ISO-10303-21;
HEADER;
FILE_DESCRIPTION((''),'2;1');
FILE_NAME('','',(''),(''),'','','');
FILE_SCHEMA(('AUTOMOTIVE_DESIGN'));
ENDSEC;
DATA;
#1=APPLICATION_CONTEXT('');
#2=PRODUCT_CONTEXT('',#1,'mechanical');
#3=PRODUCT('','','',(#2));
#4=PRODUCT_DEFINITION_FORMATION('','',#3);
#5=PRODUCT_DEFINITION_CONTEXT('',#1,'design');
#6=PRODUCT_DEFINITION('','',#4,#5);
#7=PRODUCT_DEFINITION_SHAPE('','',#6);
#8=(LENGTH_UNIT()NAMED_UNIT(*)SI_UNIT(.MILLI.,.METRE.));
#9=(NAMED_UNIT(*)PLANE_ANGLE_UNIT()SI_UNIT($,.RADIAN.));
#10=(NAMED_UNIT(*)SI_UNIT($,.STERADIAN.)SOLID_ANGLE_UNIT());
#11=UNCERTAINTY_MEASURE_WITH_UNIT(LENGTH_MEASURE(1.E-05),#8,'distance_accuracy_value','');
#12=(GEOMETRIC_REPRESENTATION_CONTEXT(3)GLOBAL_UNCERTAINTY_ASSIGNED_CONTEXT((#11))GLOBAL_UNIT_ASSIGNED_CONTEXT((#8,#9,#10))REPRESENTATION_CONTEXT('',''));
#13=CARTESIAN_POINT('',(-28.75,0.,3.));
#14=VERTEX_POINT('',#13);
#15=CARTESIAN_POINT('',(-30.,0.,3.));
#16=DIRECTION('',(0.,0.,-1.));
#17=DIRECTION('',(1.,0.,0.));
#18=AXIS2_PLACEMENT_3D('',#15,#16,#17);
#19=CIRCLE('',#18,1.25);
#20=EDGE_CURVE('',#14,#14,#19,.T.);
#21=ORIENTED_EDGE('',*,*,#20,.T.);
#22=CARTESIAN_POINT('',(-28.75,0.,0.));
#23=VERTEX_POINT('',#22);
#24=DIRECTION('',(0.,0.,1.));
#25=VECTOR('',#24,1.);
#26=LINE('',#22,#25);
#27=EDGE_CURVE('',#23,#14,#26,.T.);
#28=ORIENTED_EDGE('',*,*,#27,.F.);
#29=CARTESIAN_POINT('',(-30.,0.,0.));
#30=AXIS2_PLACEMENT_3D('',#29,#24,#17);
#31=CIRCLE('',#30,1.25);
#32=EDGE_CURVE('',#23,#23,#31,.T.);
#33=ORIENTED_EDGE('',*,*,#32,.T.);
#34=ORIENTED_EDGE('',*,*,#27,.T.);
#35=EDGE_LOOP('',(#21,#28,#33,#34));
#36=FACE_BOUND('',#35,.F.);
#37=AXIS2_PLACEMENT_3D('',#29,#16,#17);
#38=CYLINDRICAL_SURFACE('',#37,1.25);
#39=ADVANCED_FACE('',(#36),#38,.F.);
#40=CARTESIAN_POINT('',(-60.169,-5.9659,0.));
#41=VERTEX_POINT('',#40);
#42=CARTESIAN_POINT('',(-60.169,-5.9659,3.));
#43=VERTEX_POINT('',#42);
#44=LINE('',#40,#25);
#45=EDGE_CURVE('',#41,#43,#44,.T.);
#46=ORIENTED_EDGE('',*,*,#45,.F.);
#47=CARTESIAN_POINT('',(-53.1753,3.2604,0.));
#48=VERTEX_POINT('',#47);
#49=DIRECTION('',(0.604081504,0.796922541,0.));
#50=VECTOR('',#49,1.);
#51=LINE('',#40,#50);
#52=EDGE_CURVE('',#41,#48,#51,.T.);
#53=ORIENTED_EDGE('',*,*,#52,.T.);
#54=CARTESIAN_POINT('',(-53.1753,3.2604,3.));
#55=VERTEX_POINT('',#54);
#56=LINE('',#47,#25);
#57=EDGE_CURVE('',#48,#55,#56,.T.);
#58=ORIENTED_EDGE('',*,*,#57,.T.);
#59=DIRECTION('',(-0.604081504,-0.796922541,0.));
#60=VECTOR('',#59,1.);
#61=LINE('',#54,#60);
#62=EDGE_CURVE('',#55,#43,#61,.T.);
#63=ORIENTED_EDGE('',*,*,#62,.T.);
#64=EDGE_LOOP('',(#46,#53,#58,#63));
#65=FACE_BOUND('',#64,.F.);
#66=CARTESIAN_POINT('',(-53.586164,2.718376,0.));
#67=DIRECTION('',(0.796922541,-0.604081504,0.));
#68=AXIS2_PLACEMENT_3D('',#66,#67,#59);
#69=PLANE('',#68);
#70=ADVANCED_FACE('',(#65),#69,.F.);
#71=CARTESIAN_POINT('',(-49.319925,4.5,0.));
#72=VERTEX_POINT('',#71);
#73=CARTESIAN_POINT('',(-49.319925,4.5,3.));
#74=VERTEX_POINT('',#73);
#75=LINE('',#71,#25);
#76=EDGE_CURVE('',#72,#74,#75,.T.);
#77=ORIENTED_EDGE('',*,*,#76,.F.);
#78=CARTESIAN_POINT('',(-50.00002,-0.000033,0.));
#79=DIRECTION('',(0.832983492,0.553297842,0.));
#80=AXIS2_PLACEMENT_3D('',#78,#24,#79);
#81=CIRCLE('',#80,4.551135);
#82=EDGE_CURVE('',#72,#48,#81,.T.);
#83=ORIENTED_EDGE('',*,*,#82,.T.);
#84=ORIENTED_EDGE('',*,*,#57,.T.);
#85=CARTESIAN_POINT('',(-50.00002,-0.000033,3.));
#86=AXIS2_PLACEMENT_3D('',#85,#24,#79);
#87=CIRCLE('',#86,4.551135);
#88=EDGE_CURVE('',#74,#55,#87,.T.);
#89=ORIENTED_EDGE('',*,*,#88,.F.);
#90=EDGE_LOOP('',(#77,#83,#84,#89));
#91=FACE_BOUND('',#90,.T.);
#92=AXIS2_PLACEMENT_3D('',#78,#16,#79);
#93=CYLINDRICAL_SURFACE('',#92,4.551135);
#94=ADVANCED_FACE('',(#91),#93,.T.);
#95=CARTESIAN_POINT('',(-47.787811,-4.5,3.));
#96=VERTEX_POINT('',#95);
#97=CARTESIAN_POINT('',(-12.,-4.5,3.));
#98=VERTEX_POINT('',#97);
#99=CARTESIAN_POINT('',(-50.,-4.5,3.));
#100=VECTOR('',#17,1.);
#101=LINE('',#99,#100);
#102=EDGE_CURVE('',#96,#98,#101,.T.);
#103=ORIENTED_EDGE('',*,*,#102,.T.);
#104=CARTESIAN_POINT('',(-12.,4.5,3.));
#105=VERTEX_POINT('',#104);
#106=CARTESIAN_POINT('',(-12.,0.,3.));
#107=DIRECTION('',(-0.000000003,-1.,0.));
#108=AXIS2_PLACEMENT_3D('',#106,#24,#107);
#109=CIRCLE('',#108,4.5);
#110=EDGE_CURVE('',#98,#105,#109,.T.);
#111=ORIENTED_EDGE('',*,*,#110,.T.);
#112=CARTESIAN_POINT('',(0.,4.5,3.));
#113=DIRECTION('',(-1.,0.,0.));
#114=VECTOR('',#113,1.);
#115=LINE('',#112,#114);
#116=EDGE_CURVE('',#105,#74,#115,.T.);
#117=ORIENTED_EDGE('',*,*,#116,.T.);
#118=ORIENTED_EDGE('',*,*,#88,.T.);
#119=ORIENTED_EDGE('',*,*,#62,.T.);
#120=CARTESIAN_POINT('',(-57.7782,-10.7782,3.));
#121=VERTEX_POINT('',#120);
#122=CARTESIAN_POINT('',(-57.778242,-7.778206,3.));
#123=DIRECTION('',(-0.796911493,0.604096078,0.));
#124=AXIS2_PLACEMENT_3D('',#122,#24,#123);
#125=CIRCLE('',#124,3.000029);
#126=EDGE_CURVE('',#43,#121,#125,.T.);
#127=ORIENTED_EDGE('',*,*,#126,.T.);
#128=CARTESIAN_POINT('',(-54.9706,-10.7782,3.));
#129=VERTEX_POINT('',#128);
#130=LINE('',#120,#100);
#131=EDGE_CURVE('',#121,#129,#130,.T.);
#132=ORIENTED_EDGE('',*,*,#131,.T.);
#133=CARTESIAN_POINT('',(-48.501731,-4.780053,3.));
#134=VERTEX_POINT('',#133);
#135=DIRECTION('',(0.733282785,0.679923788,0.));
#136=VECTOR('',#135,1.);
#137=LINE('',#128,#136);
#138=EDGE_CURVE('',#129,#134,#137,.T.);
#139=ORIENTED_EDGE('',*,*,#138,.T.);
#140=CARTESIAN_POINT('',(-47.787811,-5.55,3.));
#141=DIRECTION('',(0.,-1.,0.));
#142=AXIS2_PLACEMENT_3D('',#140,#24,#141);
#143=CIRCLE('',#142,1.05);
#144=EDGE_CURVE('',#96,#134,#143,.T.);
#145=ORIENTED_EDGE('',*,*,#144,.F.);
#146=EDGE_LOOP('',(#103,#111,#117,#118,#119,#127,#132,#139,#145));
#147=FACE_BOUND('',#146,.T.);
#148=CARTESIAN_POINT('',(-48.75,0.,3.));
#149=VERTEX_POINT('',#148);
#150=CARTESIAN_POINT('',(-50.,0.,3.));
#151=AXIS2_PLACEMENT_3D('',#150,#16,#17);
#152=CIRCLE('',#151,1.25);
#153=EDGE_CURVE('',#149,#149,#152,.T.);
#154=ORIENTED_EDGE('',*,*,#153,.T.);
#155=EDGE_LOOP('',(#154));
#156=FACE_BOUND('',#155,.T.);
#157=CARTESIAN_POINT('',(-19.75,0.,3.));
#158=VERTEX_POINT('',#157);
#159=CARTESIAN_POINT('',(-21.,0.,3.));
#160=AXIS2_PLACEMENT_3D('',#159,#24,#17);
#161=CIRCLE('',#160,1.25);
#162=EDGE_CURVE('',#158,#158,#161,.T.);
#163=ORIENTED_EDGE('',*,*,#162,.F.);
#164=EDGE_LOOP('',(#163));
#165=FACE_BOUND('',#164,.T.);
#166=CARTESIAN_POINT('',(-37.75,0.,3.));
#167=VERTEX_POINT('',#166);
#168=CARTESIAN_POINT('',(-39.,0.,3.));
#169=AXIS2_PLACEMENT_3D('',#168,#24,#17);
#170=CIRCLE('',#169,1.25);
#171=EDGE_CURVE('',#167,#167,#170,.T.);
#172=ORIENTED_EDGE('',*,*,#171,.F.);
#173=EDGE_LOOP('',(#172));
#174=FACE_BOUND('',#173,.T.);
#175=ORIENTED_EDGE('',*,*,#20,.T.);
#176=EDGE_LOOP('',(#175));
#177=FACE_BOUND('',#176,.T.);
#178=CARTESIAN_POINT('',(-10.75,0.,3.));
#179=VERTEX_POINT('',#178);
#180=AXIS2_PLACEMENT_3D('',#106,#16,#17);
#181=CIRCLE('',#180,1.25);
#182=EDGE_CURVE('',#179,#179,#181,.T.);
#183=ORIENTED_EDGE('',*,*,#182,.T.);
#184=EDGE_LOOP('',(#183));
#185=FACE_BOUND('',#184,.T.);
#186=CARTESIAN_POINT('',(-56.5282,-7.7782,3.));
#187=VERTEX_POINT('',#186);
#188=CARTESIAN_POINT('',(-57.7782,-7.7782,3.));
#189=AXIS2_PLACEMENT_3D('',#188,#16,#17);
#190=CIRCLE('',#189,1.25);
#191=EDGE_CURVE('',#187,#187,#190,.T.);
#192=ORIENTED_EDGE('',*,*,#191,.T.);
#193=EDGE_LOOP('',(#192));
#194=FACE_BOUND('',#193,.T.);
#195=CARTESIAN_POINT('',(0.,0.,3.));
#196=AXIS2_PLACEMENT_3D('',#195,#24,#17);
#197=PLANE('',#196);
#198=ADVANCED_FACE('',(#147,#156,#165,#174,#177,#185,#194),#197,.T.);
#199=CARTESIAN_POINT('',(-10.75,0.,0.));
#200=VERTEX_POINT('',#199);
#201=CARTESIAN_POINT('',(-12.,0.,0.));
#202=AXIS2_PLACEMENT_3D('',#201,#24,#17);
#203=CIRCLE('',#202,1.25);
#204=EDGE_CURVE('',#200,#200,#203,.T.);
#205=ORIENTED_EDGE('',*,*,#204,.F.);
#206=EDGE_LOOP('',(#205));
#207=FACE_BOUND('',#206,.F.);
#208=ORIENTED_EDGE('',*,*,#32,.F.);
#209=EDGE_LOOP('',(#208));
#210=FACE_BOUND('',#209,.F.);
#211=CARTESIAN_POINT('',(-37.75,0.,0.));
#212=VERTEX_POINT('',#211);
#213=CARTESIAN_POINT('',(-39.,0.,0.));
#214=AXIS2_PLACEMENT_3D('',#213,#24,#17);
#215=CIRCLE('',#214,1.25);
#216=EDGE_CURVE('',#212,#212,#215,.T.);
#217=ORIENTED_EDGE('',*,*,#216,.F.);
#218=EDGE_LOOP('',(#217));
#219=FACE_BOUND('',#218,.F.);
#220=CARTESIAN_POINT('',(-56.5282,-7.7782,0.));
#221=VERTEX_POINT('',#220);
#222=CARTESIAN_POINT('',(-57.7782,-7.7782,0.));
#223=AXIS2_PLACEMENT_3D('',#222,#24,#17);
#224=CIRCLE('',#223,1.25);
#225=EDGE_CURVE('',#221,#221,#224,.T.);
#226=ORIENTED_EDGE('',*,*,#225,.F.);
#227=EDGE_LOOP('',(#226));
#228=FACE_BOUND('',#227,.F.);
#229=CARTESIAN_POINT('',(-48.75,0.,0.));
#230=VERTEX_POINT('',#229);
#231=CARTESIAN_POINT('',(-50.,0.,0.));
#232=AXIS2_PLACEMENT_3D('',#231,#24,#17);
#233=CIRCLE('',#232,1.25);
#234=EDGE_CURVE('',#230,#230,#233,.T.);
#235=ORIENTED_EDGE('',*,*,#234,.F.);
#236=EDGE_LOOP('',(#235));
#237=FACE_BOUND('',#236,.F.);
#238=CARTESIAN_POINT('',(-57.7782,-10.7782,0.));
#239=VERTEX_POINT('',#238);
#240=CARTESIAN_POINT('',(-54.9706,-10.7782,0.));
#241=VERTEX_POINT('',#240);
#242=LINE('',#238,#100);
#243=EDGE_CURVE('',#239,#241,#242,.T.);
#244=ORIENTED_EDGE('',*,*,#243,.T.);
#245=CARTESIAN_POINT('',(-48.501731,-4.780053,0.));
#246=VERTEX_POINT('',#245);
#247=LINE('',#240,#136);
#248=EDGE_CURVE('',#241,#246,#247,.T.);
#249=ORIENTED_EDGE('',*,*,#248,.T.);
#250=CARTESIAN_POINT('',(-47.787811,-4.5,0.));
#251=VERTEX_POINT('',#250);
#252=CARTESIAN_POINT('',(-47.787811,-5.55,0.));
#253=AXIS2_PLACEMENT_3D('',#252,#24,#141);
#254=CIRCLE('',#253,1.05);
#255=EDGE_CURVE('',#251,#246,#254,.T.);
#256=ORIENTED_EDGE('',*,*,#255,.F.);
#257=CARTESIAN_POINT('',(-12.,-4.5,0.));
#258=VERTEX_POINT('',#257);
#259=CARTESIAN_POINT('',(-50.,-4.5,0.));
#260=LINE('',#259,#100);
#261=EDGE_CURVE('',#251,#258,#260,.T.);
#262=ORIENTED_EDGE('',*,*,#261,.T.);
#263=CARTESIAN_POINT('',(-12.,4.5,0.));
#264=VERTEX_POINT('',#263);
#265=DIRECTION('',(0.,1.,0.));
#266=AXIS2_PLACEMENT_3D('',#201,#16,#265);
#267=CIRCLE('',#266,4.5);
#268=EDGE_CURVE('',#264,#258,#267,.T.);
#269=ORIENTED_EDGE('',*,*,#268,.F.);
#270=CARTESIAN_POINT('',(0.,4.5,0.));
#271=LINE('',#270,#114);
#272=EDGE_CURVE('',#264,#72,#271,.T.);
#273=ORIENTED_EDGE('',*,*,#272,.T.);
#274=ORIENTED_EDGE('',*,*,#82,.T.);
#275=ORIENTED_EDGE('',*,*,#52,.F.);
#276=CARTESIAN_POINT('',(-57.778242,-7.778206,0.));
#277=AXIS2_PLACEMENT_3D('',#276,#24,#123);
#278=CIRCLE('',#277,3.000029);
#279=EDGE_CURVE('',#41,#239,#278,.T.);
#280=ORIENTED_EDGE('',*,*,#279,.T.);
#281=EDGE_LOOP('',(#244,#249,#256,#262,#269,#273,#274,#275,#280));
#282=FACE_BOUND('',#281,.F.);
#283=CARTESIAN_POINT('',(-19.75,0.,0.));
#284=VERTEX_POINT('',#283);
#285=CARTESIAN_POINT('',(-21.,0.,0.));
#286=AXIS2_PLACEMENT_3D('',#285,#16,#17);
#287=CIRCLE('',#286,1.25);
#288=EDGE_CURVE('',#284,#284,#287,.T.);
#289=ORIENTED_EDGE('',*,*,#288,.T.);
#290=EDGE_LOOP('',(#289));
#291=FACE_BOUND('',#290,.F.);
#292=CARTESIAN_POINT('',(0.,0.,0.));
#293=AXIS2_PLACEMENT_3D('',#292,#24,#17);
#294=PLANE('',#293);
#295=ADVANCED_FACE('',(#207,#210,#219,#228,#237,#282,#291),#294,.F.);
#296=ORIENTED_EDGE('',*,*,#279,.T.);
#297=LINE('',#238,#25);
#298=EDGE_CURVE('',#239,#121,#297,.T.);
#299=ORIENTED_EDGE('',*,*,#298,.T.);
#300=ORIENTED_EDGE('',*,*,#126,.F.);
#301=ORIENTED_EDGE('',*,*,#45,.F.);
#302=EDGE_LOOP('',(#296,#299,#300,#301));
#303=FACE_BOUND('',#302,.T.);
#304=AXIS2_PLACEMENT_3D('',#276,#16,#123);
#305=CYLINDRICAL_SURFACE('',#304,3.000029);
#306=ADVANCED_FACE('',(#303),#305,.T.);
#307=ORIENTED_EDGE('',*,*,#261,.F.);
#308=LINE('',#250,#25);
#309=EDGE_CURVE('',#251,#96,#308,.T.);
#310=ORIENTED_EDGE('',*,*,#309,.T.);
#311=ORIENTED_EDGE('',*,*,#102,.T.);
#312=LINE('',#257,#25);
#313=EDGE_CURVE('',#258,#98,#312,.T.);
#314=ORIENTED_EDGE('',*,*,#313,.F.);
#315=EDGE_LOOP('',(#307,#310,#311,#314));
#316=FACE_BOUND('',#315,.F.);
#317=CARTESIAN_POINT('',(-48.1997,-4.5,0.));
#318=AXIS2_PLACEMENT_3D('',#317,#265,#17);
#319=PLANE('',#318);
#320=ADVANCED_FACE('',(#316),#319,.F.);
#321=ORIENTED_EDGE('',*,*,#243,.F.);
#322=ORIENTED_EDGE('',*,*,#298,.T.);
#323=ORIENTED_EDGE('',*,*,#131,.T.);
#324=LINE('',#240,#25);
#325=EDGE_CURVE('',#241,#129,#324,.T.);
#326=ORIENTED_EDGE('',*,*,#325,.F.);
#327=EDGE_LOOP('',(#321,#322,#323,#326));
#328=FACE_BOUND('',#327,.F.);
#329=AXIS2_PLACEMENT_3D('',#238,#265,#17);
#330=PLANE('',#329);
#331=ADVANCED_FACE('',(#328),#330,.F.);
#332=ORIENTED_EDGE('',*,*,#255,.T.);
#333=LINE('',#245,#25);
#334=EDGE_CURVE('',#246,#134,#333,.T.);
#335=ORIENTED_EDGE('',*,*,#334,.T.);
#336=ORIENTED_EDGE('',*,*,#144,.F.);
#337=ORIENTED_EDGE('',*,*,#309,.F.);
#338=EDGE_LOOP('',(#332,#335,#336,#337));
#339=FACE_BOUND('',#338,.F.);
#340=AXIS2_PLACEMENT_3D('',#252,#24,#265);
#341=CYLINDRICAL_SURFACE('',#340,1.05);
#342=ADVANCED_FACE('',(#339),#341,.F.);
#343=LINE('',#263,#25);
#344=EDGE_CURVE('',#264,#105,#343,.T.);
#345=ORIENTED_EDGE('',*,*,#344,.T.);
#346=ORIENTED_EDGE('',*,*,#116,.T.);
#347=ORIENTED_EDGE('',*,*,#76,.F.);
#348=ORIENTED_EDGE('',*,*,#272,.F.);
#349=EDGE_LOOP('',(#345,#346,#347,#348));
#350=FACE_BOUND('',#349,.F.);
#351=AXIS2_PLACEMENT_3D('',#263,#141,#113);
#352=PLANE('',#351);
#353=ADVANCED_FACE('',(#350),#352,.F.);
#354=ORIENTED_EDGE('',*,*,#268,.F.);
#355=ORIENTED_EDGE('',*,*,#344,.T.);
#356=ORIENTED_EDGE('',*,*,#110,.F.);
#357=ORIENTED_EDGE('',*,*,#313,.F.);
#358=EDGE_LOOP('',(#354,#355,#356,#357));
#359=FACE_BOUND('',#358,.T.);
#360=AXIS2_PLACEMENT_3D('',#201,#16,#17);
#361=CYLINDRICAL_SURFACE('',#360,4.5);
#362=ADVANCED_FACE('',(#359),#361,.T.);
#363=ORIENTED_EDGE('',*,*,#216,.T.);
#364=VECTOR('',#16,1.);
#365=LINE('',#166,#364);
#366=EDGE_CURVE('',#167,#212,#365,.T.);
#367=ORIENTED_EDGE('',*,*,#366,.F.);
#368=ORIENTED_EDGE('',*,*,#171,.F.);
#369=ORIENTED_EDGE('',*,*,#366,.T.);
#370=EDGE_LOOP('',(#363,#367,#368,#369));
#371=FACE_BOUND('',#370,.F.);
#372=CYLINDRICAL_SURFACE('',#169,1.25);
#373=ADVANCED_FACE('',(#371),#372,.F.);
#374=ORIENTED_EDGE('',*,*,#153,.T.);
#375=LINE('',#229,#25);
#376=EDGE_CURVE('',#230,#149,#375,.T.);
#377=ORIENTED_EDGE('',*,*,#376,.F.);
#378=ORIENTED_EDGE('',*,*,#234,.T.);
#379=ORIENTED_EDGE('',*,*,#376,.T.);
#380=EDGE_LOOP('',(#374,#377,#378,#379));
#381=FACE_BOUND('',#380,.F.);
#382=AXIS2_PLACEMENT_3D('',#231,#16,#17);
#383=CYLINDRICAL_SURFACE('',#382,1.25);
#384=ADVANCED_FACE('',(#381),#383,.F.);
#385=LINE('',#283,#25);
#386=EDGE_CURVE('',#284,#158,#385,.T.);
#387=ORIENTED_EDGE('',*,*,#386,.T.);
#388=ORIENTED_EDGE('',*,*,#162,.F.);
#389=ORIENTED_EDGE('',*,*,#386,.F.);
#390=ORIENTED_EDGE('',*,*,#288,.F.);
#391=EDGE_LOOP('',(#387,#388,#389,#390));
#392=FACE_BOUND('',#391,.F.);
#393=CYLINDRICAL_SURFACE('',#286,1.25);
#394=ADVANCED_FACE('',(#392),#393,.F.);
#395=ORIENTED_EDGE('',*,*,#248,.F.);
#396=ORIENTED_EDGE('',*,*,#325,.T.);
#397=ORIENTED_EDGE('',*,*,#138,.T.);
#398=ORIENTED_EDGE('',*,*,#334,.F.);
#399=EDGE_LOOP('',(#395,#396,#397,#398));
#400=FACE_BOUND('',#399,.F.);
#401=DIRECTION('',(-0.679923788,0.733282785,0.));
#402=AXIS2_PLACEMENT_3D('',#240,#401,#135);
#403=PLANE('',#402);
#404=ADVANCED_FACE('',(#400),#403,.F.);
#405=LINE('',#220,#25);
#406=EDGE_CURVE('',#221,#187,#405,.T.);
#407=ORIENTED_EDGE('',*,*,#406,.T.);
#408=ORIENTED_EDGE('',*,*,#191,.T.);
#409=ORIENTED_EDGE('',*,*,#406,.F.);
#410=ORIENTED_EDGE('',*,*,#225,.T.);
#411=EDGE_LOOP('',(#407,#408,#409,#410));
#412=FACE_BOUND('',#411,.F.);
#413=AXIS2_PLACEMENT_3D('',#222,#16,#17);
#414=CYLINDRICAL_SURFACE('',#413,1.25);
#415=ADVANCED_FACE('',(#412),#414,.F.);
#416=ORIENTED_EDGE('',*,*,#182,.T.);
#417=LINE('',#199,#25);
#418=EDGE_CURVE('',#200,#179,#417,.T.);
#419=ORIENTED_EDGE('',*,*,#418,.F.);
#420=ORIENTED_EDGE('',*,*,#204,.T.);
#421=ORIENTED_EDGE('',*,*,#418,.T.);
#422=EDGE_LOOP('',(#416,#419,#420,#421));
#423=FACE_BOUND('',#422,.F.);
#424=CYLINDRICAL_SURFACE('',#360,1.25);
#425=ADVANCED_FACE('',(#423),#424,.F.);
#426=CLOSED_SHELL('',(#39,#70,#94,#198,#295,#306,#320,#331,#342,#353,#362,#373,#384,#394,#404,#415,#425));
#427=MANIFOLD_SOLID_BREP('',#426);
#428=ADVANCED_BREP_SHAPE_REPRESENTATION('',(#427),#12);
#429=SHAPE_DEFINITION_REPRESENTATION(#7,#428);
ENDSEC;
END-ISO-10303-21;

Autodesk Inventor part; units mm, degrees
ref_plane "YZ Plane" through (0, 0, 0) normal (1, 0, 0) x (0, 1, 0)
ref_plane "XZ Plane" through (0, 0, 0) normal (0, 1, 0) x (-1, 0, 0)
ref_plane "XY Plane" through (0, 0, 0) normal (0, 0, 1) x (1, 0, 0)
sketch "スケッチ1" plane through (0, 0, 0) normal (0, 0, 1) x (1, 0, 0)
  circle A0 centre (-55, 0) radius 8.025 construction
  circle A1 centre (0, 0) radius 1.25 construction
  arc A2 (-44.5788, 6) -> (-63.6661, 8.3366) centre (-55, 0) ccw construction
  line L0 (-63.6661, 8.3366) -> (-109.1623, -38.9576) construction
  line L1 (-102.7709, -46.5745) -> (-48.2949, -9.9821) construction
  arc A3 (-48.2949, -9.9821) -> (-44.5788, -6) centre (-55, 0) ccw construction
  line L2 (-44.5788, -6) -> (-5.2915, -6) construction
  arc A4 (-5.2915, -6) -> (-5.2915, 6) centre (0, 0) ccw construction
  line L3 (-5.2915, 6) -> (-44.5788, 6) construction
  circle A5 centre (0, 0) radius 1.25
  circle A6 centre (-30, 0) radius 1.25
  circle A7 centre (-12, 0) radius 1.25
  circle A8 centre (-21, 0) radius 1.25
  line L4 (-30, 0) -> (0, 0)
  line L5 (-30, 0) -> (-50, 0)
  line L6 (-50, 0) -> (-30, 0)
  circle A9 centre (-50, 0) radius 1.25
  circle A10 centre (-50, 0) radius 4.025 construction
  circle A11 centre (-50, 0) radius 7.125 construction
  circle A12 centre (-57.7782, -7.7782) radius 1.25
  circle A13 centre (-57.7782, -7.7782) radius 3 construction
  line L7 (-50, 0) -> (-57.7782, -7.7782) construction
  line L8 (-53.1753, 3.2604) -> (-60.169, -5.9659)
  line L9 (-55.3874, -9.5904) -> (-46.209, 2.5181)
  arc A14 (-46.209, 2.5181) -> (-53.1753, 3.2604) centre (-50, 0) ccw
  arc A15 (-60.169, -5.9659) -> (-55.3874, -9.5904) centre (-57.7782, -7.7782) ccw
  line L10 (-50, 0) -> (0, 0) construction
  line L11 (-50, -4.5) -> (0, -4.5)
  line L12 (0, 4.5) -> (-50, 4.5)
  arc A16 (-50, 4.5) -> (-50, -4.5) centre (-50, 0) ccw
  arc A17 (0, -4.5) -> (0, 4.5) centre (0, 0) ccw
  line L13 (-57.7782, -10.7782) -> (-54.9706, -10.7782)
  line L14 (-54.9706, -10.7782) -> (-48.1997, -4.5)
  line L15 (-50, 0) -> (-57.7782, -7.7782)
  circle A18 centre (-12, 0) radius 4.5
  point P0 (-53.8891, -3.8891)
  point P1 (-25, 0)
  point P2 (-48.7574, -3)
  point P3 (-49.3198, 4.5)
  point P4 (-53.5862, 2.7184)
  point P5 (-51.3675, -4.2872)
  point P6 (-12, -4.5)
  point P7 (-12, 4.5)
  dimension "d0" = 20
  dimension "d2" = 2.5
  dimension "d3" = 8.05
  dimension "d4" = 3.1
  dimension "d5" = 30
  dimension "d6" = 2.5
  dimension "d7" = 2.5
  dimension "d8" = 2.5
  dimension "d9" = 2.5
  dimension "d11" = 9
  dimension "d13" = 2.5
  dimension "d14" = 6
  dimension "d15" = 6
  dimension "d16" = 9
  dimension "d21" = 135
  dimension "d22" = 10
  dimension "d30" = 9
  dimension "d31" = 11
extrude "押し出し1" add sketch "スケッチ1" along normal blind 3 contours L4 A8 A18 L11 A16 L9 L5 A6 | A6 L5 L9 A14 L12 A18 L4 A8 | L9 A16 L15 A9 L5 | L5 A9 L15 A16 L12 A14 L9 | A16 L11 L14 L13 A15 L9 | L9 A15 L8 A16 | A18 L4 A7 | L4 A7 A18 | L12 A16 L8 A14
fillet "フィレット1" radius 1.05 1 edges at (-48.1997, -4.5, 1.5)
sketch "スケッチ2" plane through (0, 0, 3) normal (0, 0, 1) x (1, 0, 0)
  arc A0 (-60.7927, -6.5251) -> (-59.7797, -5.8711) centre (-60.7525, -5.4759) ccw
  arc A1 (-55.3849, -4.4725) -> (-59.7797, -5.8711) centre (-57.0004, -7.0004) ccw
  arc A2 (-55.3849, -4.4725) -> (-43.7567, 3.1657) centre (-50, 0) ccw
  arc A3 (-44.0452, 4.6286) -> (-43.7567, 3.1657) centre (-43.1001, 4.055) ccw
  line L0 (-44.0452, 4.6286) -> (-41.5381, 8.9709)
  arc A4 (-41.5381, 8.9709) -> (-46.5567, 11.6351) centre (-44, 10.3923) ccw
  line L1 (-46.5567, 11.6351) -> (-49.0637, 7.2927)
  arc A5 (-50.5985, 6.9744) -> (-49.0637, 7.2927) centre (-49.9731, 7.8177) ccw
  arc A6 (-50.5985, 6.9744) -> (-50.2678, 6.9949) centre (-50, 0) ccw
  circle A7 centre (-50, 0) radius 4.025
  circle A8 centre (-50, 0) radius 1.25 projected
  circle A9 centre (-39, 0) radius 4
  line L2 (-50, 0) -> (-38.3804, 0)
  circle A10 centre (-39, 0) radius 1.25
  circle A11 centre (-30, 0) radius 1.25 projected
  point P0 (0, 0)
  point P1 (-43.3711, 2.3255)
  point P2 (-43, 0)
  point P3 (-49.3534, 6.9701)
  point P4 (-44.1966, 3.9141)
  point P5 (-43.7567, 3.1657)
  dimension "d23" = 12
  dimension "d24" = 8
  dimension "d27" = 2.5
  dimension "d28" = 9
  dimension "d29" = 7
extrude "押し出し2" cut sketch "スケッチ2" against normal blind 3 contours A10
thread "ねじ1" size "M3x0.5" class "6H" standard "ANSI Metric M Profile" full length
thread "ねじ2" size "M3x0.5" class "6H" standard "ANSI Metric M Profile" full length
thread "ねじ3" size "M3x0.5" class "6H" standard "ANSI Metric M Profile" full length
thread "ねじ4" size "M3x0.5" class "6H" standard "ANSI Metric M Profile" full length
thread "ねじ5" size "M3x0.5" class "6H" standard "ANSI Metric M Profile" full length
thread "ねじ6" size "M3x0.5" class "6H" standard "ANSI Metric M Profile" full length
properties part number "中間節アーム先端締結パーツ外" material "アルミニウム 7075"
